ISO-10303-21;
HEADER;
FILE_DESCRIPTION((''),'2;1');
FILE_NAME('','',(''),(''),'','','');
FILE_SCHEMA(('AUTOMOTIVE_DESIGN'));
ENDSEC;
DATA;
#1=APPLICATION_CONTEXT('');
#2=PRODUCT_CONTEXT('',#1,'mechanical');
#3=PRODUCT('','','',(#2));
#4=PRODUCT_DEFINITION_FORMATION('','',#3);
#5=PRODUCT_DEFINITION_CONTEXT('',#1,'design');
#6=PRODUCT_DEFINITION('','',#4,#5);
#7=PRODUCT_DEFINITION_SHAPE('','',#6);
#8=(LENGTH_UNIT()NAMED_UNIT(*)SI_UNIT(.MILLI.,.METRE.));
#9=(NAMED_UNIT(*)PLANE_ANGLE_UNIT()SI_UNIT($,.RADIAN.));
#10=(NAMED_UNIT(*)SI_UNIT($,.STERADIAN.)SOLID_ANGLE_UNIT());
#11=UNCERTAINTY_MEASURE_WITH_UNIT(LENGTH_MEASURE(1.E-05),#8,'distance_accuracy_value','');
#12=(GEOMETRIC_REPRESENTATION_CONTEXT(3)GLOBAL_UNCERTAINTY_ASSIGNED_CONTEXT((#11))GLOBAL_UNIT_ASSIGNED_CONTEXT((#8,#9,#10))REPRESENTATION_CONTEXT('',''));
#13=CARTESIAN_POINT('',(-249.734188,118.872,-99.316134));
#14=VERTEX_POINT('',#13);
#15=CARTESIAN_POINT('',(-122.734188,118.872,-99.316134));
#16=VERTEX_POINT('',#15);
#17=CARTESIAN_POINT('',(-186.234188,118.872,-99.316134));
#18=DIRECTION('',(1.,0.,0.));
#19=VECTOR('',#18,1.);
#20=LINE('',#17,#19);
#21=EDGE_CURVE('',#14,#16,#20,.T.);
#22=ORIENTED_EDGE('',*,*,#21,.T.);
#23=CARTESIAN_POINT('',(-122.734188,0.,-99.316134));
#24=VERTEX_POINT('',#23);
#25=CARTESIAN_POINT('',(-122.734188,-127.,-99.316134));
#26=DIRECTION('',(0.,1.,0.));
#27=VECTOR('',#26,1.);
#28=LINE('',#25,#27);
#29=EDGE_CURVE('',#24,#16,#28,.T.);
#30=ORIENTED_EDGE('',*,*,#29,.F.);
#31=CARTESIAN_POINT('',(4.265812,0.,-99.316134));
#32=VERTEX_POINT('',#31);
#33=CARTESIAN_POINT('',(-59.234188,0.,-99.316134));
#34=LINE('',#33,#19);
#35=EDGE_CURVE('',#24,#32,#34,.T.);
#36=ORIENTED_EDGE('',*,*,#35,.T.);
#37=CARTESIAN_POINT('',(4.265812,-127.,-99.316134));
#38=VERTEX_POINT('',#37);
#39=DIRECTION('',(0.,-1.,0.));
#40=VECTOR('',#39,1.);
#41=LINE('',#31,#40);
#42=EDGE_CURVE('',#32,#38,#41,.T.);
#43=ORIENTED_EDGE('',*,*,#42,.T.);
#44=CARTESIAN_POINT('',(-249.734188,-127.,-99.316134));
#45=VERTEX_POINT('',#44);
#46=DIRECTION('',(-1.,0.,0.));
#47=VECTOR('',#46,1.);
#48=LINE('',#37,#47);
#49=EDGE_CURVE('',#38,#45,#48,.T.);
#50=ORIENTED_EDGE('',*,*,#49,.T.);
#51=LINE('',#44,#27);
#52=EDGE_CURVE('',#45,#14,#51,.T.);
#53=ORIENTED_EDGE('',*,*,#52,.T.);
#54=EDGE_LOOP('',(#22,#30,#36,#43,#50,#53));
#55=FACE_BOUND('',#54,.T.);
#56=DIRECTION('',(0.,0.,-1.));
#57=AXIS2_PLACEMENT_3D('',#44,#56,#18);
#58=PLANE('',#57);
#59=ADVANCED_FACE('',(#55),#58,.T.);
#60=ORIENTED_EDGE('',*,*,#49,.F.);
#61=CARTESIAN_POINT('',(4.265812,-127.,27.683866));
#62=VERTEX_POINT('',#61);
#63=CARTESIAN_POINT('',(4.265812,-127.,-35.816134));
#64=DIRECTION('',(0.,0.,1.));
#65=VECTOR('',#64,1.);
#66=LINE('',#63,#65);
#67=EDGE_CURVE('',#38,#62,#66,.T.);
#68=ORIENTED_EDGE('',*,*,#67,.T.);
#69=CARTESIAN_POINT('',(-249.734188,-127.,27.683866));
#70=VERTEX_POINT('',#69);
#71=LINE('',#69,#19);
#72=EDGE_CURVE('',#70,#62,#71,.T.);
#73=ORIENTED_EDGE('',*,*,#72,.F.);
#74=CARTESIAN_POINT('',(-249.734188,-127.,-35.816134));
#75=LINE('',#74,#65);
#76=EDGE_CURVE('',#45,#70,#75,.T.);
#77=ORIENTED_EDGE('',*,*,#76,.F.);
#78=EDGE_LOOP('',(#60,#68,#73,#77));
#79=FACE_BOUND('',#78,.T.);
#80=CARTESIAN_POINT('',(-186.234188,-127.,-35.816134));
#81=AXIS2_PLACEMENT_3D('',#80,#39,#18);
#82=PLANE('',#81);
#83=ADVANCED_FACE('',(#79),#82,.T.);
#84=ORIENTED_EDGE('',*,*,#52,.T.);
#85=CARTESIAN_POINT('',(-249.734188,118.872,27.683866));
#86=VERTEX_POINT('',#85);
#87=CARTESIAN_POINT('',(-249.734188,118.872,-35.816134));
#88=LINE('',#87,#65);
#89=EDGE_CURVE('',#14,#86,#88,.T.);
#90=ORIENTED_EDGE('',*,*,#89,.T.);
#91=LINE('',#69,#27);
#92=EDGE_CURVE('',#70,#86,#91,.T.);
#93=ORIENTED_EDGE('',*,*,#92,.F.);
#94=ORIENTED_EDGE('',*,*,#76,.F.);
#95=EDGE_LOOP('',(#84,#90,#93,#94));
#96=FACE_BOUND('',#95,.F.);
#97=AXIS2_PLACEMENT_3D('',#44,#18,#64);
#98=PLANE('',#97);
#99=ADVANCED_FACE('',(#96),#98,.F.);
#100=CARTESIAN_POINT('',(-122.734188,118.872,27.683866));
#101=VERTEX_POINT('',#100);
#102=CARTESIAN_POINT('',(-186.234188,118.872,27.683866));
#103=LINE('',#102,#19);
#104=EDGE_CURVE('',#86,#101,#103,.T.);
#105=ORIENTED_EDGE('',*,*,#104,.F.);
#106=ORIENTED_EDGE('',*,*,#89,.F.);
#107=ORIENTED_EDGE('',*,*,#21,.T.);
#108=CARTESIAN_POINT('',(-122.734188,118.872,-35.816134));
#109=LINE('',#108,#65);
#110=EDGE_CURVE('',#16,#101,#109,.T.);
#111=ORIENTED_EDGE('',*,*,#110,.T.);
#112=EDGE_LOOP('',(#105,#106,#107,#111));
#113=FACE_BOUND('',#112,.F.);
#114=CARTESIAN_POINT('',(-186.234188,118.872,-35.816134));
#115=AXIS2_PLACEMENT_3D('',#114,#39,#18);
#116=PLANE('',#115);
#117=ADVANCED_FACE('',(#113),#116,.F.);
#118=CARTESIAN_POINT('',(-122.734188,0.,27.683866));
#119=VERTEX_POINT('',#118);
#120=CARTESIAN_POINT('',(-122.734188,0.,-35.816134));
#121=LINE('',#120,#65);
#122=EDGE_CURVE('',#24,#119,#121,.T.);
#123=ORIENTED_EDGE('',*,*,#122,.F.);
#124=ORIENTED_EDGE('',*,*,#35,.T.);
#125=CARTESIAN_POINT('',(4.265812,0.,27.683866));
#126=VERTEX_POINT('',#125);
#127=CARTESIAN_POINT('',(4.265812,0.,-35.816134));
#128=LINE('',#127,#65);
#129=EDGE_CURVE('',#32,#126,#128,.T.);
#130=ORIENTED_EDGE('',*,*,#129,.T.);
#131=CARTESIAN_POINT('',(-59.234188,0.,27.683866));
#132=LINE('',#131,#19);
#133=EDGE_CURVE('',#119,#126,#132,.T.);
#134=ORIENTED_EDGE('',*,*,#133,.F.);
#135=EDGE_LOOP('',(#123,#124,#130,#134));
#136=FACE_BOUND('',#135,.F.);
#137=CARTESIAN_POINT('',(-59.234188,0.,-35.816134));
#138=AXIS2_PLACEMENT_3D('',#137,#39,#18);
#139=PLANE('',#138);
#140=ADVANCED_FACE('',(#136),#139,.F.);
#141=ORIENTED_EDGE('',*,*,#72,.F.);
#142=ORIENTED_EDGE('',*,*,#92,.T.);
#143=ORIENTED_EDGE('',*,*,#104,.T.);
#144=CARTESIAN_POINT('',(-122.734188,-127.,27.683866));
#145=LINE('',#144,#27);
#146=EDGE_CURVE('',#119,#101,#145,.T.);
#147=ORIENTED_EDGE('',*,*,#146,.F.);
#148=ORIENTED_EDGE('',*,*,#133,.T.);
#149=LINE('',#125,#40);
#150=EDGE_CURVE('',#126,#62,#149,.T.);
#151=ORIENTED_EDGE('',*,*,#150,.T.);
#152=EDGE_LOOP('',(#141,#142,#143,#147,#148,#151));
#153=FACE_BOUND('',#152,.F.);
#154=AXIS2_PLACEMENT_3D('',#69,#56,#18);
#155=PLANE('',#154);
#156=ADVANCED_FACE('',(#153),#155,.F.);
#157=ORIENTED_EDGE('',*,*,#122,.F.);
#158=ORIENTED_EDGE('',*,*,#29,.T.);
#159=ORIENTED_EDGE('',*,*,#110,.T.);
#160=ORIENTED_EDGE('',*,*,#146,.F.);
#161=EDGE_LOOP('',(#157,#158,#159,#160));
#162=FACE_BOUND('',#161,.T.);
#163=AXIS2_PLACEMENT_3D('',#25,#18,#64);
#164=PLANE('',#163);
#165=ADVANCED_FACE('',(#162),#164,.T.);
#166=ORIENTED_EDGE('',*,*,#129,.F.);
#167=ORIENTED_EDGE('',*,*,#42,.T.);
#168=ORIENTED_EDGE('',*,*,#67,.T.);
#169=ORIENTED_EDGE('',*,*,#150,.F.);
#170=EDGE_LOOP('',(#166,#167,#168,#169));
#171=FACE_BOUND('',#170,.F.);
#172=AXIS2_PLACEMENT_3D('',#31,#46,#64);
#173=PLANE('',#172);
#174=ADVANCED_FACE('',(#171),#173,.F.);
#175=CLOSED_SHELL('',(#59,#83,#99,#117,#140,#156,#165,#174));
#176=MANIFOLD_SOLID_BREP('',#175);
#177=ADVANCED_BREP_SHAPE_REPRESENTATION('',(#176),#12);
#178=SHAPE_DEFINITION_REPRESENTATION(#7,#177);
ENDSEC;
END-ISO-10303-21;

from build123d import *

# Parameters (mm, degrees)
F1_W     = 127
F1_H     = 127
F2_DEPTH = 127
F3_W     = 127
F3_H     = 127
F4_DEPTH = 245.872


# Not quite as in the source:
# - a variable given as a bare number and used for a length is read in inches; the dataset says mm whatever the document's units were


with BuildPart() as f2:
    # F1 (on Front) → F2 (new body)
    with BuildSketch(Plane.XZ):
        with Locations((-59.2341877744, -35.8161340777)):
            Rectangle(F1_W, F1_H)
    extrude(amount=F2_DEPTH)

    # F3 (on face) → F4 (join)
    with BuildSketch(Plane.XZ.offset(127)):
        with Locations((-186.2341877744, -35.8161340777)):
            Rectangle(F3_W, F3_H)
    extrude(amount=-F4_DEPTH)


solid = f2.part
